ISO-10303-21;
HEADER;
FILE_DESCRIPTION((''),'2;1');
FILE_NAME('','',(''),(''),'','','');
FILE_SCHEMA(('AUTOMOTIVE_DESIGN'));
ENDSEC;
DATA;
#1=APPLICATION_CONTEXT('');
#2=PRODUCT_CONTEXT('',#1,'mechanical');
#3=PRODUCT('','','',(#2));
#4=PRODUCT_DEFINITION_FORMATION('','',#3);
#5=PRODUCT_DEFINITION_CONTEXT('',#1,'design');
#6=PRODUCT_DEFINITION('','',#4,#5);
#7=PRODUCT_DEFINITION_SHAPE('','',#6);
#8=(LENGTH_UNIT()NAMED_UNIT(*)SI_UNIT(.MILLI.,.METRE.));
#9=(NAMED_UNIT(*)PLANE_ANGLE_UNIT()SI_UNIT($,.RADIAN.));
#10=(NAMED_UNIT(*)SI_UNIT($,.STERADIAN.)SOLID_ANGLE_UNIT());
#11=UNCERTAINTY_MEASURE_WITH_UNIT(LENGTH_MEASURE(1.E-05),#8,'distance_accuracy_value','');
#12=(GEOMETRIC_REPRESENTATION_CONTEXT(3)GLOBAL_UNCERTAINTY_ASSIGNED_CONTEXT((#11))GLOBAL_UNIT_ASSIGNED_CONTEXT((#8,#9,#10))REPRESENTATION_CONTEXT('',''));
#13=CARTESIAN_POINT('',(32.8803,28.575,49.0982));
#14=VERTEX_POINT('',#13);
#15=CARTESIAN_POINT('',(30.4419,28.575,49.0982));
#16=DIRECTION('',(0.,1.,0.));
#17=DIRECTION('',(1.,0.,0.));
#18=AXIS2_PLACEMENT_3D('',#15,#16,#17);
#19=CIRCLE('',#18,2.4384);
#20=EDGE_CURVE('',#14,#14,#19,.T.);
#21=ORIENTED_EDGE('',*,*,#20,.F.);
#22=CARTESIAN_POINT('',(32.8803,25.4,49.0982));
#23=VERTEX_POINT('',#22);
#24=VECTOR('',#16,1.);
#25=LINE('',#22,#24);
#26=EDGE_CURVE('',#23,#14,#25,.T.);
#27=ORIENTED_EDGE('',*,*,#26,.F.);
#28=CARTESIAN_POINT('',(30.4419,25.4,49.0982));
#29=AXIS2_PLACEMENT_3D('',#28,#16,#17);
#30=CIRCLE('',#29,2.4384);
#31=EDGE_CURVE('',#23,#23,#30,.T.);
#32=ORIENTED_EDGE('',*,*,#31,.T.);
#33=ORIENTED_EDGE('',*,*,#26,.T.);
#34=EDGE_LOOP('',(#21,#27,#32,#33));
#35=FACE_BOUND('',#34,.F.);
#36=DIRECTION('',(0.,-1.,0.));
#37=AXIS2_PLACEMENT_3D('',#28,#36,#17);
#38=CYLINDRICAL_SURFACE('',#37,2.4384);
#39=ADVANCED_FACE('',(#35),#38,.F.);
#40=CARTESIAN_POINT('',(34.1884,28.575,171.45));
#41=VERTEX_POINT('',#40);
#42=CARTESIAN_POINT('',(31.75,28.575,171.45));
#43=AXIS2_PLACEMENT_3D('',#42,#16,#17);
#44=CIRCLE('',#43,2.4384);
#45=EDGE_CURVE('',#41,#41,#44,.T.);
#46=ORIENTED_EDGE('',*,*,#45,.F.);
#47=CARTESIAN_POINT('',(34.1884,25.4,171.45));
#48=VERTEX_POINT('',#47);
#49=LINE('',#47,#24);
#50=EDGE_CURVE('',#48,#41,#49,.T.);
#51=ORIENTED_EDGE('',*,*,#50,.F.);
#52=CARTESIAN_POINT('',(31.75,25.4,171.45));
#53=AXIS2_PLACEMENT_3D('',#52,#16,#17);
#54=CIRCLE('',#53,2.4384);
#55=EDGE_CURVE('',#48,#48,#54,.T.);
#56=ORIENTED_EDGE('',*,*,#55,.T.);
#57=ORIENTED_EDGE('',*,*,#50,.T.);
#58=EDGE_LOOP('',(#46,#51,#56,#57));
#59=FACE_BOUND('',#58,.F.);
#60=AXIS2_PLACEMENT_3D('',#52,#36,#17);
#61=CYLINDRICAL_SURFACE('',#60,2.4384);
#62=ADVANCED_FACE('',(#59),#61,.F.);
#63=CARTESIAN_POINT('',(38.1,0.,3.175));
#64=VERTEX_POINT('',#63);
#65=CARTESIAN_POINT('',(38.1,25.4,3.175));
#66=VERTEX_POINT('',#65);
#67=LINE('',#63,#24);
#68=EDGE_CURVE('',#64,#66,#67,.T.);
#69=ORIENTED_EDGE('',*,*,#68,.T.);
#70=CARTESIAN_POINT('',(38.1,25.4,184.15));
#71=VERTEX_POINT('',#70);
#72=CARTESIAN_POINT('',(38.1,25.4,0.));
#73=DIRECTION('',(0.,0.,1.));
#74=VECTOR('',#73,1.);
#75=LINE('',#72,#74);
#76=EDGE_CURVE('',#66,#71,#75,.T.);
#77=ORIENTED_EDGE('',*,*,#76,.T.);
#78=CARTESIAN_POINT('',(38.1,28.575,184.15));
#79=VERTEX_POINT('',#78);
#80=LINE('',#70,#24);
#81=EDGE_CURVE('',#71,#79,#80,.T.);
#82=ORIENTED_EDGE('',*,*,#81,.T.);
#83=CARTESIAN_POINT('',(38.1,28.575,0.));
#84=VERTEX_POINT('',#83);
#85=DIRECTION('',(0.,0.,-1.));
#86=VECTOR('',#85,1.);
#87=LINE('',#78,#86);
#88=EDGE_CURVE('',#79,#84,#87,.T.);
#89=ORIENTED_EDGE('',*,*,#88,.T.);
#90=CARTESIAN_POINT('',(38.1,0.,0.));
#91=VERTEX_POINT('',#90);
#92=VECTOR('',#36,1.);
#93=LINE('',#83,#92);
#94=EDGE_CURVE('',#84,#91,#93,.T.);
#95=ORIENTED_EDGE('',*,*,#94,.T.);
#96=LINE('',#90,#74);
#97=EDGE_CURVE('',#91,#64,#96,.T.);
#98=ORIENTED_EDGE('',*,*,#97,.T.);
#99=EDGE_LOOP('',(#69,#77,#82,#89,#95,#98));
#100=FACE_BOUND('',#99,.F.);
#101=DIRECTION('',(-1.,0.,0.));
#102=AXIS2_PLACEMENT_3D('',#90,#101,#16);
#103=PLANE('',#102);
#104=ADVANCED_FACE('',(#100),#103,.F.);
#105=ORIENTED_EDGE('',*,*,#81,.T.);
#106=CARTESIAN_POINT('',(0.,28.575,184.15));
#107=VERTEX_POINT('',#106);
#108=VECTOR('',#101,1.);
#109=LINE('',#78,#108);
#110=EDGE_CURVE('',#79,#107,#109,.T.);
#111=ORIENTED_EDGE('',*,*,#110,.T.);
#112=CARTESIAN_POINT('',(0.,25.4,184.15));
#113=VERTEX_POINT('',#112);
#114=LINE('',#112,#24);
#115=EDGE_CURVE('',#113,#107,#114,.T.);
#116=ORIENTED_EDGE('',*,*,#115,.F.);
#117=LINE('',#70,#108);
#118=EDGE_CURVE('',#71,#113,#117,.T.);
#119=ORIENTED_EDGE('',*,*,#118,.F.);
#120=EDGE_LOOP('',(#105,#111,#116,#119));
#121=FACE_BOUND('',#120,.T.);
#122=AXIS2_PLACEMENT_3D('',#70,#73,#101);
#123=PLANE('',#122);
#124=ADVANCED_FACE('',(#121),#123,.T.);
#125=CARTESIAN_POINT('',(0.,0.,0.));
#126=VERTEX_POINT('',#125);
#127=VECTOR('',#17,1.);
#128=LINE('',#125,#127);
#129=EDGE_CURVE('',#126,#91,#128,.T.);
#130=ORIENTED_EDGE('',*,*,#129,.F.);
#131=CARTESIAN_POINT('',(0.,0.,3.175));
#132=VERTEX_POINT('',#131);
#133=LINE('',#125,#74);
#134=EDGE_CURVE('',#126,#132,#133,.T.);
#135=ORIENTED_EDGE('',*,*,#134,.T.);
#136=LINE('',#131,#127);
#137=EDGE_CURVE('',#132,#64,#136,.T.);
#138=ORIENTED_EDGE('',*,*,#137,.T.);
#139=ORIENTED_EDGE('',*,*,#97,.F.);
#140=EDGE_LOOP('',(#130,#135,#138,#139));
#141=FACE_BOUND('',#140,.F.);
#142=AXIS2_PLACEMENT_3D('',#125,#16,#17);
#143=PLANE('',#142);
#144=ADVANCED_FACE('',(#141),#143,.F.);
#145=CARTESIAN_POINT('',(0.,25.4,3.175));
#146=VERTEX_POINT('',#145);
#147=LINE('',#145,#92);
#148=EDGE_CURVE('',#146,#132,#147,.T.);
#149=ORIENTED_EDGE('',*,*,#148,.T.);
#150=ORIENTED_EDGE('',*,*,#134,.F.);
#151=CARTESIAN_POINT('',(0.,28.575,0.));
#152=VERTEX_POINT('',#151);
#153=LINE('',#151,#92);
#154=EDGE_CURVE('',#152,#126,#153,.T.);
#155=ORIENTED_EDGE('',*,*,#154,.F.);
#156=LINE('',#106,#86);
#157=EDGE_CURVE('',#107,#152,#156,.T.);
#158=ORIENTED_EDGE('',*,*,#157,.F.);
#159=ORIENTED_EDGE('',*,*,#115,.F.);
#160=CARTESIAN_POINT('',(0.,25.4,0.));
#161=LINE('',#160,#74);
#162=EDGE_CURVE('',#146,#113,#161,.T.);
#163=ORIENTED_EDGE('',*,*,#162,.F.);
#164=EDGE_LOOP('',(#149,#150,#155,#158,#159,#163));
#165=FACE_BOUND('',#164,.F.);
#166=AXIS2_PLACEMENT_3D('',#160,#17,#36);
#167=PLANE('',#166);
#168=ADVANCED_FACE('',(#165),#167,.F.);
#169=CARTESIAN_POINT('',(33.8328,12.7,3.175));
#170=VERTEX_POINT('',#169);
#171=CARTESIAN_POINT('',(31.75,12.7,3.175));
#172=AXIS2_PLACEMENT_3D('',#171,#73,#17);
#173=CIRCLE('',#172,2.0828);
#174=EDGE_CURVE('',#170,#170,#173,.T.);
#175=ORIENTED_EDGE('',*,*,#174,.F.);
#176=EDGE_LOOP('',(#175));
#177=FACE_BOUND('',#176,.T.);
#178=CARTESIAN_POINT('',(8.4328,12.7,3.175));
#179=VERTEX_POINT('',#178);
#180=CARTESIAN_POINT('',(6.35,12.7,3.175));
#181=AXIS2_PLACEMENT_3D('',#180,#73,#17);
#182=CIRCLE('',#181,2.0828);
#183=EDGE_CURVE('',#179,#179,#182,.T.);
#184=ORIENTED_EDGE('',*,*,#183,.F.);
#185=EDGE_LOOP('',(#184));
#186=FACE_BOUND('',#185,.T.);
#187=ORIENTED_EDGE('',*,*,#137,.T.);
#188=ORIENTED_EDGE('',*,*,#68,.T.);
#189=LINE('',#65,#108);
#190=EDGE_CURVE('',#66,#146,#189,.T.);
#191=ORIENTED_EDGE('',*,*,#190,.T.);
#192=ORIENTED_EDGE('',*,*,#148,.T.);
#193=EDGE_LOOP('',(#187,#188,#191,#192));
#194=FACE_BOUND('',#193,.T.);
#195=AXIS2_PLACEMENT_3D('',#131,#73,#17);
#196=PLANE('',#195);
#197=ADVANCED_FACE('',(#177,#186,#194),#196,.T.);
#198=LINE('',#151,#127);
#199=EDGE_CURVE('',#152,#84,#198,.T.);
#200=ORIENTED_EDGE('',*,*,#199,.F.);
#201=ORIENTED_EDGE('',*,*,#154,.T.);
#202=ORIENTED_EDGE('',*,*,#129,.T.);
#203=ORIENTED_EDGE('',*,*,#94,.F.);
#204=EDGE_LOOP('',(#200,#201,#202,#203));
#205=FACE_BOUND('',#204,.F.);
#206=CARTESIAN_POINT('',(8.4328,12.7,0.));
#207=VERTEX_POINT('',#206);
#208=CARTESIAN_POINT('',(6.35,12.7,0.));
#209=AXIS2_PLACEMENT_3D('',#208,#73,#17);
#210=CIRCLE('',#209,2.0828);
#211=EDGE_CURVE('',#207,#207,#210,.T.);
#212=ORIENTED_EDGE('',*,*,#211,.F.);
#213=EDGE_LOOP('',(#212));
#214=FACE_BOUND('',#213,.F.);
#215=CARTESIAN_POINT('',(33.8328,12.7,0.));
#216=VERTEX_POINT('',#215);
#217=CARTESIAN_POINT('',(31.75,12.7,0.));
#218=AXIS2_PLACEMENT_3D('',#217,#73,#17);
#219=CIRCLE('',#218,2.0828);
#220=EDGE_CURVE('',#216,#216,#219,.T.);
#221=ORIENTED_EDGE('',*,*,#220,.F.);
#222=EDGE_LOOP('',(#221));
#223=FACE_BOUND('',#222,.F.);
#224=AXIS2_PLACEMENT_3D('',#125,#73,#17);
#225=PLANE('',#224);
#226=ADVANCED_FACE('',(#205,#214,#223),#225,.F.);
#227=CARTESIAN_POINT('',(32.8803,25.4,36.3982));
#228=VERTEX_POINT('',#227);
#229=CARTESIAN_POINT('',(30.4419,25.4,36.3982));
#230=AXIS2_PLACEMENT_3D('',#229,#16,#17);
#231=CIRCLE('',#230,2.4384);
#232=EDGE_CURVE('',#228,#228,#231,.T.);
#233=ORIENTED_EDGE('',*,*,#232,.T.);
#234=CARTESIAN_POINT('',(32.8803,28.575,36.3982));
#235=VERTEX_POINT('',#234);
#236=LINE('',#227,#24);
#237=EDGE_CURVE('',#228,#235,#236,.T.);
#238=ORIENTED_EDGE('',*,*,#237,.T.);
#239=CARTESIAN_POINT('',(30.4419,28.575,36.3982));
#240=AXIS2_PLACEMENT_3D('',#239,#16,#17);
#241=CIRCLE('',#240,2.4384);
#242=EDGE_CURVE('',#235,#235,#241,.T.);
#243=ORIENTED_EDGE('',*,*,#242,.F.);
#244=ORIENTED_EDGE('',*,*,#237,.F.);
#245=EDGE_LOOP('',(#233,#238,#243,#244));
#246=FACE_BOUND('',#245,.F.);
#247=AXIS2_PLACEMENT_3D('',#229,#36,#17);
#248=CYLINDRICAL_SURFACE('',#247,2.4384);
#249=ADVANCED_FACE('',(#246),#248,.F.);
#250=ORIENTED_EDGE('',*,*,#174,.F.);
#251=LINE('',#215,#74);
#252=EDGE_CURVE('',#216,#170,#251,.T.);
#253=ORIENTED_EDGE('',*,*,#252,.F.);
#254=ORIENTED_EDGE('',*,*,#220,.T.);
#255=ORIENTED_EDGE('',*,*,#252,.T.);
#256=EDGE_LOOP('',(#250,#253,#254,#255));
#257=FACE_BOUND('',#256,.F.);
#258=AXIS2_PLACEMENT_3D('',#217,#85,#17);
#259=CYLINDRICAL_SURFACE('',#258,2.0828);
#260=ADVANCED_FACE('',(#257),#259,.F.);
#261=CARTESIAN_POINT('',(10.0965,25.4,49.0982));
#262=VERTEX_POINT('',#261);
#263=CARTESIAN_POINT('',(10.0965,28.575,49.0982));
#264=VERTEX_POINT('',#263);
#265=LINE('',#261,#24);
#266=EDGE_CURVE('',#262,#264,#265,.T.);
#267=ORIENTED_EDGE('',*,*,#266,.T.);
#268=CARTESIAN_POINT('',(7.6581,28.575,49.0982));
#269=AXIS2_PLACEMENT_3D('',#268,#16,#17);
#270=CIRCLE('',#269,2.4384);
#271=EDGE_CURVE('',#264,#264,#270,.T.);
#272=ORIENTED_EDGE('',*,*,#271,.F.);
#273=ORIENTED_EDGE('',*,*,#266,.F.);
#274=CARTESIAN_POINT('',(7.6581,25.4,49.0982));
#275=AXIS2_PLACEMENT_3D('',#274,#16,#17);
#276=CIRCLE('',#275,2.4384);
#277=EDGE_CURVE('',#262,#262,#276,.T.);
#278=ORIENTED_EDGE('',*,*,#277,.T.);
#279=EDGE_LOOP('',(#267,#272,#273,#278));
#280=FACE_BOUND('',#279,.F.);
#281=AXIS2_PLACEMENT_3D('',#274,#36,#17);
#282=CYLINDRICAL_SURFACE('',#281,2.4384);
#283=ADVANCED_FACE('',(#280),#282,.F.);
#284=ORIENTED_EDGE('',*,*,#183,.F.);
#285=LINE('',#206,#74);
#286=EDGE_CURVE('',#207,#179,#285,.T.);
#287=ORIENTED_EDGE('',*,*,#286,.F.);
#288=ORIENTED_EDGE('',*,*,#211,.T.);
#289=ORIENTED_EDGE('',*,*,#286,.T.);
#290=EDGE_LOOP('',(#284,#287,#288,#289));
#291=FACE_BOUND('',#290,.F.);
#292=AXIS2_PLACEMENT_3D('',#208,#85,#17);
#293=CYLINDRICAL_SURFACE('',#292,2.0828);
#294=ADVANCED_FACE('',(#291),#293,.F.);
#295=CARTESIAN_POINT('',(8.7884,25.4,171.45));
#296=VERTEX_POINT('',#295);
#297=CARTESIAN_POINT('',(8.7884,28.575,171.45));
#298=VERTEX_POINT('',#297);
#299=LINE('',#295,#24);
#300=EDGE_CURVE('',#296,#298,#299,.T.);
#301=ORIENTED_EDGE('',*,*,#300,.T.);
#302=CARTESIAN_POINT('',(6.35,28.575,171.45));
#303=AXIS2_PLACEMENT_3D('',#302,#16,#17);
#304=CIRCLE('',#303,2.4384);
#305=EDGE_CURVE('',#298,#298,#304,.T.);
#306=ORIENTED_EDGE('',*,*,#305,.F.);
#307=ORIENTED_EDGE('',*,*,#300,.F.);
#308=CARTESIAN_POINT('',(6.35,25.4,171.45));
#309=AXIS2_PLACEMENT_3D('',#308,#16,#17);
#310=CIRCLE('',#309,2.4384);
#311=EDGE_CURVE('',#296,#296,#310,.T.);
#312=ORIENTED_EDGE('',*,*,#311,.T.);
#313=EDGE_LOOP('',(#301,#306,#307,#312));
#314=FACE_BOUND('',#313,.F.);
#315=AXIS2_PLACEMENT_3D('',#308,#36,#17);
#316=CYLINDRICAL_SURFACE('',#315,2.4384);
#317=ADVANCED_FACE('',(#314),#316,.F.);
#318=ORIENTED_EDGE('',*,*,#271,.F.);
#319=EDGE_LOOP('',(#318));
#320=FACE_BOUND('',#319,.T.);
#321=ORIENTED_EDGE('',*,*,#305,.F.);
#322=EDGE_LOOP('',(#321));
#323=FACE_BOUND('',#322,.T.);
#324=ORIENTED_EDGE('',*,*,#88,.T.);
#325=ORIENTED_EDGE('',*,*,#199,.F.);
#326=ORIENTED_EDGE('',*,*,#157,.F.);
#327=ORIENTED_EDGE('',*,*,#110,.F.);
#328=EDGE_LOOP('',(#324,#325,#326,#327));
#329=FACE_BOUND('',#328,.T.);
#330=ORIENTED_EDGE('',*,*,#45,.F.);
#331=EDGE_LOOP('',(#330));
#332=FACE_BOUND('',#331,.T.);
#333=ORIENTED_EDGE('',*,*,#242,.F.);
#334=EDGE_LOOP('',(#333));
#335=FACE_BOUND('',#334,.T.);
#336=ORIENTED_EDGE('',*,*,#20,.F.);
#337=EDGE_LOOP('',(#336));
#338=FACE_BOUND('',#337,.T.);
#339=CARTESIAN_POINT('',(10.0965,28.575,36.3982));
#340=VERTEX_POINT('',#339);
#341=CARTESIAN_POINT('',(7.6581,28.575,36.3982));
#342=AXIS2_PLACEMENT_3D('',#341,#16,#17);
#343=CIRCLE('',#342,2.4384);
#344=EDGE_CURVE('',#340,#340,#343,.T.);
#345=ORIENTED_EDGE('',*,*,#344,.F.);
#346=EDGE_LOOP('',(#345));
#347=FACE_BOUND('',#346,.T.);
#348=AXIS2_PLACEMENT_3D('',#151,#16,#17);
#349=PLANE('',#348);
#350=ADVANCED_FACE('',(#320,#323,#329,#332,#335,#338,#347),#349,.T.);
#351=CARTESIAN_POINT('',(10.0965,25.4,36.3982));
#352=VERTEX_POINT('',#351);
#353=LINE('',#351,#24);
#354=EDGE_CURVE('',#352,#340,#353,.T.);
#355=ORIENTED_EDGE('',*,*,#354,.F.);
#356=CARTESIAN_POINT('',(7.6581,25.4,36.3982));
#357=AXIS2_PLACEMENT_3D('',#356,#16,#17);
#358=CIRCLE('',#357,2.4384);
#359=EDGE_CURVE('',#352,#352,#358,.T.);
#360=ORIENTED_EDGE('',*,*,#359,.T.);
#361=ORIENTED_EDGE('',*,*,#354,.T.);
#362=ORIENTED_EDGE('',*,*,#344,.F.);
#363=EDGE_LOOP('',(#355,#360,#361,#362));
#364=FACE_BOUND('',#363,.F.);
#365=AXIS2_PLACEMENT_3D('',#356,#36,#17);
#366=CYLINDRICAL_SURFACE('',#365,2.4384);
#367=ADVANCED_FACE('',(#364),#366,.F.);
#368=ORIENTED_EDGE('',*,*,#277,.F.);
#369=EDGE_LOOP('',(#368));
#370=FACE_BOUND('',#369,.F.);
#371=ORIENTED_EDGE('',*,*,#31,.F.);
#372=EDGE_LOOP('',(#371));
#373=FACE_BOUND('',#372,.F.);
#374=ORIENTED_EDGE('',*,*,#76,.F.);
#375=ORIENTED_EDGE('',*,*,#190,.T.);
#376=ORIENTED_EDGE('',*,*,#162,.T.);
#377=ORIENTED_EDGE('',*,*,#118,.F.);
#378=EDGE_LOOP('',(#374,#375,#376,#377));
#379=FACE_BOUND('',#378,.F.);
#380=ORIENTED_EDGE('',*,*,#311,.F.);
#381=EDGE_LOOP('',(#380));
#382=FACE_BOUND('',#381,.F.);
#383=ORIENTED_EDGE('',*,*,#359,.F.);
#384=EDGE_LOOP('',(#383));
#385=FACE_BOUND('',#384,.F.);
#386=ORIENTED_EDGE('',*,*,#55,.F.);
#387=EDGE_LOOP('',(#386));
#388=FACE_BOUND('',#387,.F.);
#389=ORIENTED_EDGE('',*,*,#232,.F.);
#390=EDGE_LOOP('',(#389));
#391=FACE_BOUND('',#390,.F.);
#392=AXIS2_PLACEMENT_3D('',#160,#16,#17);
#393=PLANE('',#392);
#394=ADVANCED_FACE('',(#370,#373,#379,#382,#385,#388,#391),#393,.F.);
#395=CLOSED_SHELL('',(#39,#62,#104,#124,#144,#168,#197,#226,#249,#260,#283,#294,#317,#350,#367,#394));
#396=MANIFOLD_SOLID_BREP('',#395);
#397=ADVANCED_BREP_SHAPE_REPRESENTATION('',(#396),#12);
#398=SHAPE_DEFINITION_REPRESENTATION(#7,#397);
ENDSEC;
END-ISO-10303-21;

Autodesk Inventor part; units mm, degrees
ref_plane "YZ Plane" through (0, 0, 0) normal (1, 0, 0) x (0, 1, 0)
ref_plane "XZ Plane" through (0, 0, 0) normal (0, 1, 0) x (-1, 0, 0)
ref_plane "XY Plane" through (0, 0, 0) normal (0, 0, 1) x (1, 0, 0)
sketch "Sketch1" plane through (0, 0, 0) normal (0, 0, 1) x (1, 0, 0)
  line L0 (0, 0) -> (38.1, 0)
  line L1 (38.1, 0) -> (38.1, 25.4)
  line L2 (38.1, 25.4) -> (0, 25.4)
  line L3 (0, 25.4) -> (0, 0)
  circle A0 centre (6.35, 12.7) radius 2.0828
  circle A1 centre (31.75, 12.7) radius 2.0828
  dimension "d0" = 38.1
  dimension "d1" = 25.4
  dimension "d2" = 4.1656
  dimension "d3" = 12.7
  dimension "d4" = 6.35
  dimension "d26" = 25.4
extrude "Plate1" add sketch "Sketch1" along normal blind 3.175
sketch "Sketch2" plane through (0, 25.4, 0) normal (0, 1, 0) x (1, 0, 0)
  line L0 (0, -3.175) -> (38.1, -3.175) projected
  line L1 (38.1, 0) -> (38.1, -3.175) projected
  line L2 (0, 0) -> (38.1, 0)
  line L3 (38.1, 0) -> (38.1, -184.15)
  line L4 (38.1, -184.15) -> (0, -184.15)
  line L5 (0, -184.15) -> (0, 0)
  circle A0 centre (6.35, -171.45) radius 2.4384
  line L6 (19.05, -184.15) -> (19.05, -3.175) construction
  circle A1 centre (31.75, -171.45) radius 2.4384
  circle A2 centre (7.6581, -49.0982) radius 2.4384
  circle A3 centre (7.6581, -36.3982) radius 2.4384
  circle A4 centre (30.4419, -49.0982) radius 2.4384
  circle A5 centre (30.4419, -36.3982) radius 2.4384
  line L7 (7.6581, -36.3982) -> (7.6581, -49.0982) construction
  dimension "d14" = 4.8768
  dimension "d15" = 184.15
  dimension "d16" = 12.7
  dimension "d17" = 12.7
  dimension "d21" = 12.7
  dimension "d22" = 11.3919
  dimension "d23" = 122.3518
extrude "Extrusion1" add sketch "Sketch2" along normal blind 3.175
equation "\"BendRadius\" = Thickness"
equation "\"BendReliefWidth\" = Thickness"
equation "\"BendReliefDepth\" = 0.5 * Thickness"
equation "\"CornerReliefSize\" = 4 * Thickness"
equation "\"MinimumRemnant\" = 2 * Thickness"
equation "\"TransitionRadius\" = BendRadius"
equation "\"JacobiRadiusSize\" = BendRadius"
equation "\"GapSize\" = Thickness"
equation "\"d13\" = BendRadius"
equation "\"Thickness\" = 3.175"
properties part number "Flange for 3-4 in Piston" material "Aluminum"
